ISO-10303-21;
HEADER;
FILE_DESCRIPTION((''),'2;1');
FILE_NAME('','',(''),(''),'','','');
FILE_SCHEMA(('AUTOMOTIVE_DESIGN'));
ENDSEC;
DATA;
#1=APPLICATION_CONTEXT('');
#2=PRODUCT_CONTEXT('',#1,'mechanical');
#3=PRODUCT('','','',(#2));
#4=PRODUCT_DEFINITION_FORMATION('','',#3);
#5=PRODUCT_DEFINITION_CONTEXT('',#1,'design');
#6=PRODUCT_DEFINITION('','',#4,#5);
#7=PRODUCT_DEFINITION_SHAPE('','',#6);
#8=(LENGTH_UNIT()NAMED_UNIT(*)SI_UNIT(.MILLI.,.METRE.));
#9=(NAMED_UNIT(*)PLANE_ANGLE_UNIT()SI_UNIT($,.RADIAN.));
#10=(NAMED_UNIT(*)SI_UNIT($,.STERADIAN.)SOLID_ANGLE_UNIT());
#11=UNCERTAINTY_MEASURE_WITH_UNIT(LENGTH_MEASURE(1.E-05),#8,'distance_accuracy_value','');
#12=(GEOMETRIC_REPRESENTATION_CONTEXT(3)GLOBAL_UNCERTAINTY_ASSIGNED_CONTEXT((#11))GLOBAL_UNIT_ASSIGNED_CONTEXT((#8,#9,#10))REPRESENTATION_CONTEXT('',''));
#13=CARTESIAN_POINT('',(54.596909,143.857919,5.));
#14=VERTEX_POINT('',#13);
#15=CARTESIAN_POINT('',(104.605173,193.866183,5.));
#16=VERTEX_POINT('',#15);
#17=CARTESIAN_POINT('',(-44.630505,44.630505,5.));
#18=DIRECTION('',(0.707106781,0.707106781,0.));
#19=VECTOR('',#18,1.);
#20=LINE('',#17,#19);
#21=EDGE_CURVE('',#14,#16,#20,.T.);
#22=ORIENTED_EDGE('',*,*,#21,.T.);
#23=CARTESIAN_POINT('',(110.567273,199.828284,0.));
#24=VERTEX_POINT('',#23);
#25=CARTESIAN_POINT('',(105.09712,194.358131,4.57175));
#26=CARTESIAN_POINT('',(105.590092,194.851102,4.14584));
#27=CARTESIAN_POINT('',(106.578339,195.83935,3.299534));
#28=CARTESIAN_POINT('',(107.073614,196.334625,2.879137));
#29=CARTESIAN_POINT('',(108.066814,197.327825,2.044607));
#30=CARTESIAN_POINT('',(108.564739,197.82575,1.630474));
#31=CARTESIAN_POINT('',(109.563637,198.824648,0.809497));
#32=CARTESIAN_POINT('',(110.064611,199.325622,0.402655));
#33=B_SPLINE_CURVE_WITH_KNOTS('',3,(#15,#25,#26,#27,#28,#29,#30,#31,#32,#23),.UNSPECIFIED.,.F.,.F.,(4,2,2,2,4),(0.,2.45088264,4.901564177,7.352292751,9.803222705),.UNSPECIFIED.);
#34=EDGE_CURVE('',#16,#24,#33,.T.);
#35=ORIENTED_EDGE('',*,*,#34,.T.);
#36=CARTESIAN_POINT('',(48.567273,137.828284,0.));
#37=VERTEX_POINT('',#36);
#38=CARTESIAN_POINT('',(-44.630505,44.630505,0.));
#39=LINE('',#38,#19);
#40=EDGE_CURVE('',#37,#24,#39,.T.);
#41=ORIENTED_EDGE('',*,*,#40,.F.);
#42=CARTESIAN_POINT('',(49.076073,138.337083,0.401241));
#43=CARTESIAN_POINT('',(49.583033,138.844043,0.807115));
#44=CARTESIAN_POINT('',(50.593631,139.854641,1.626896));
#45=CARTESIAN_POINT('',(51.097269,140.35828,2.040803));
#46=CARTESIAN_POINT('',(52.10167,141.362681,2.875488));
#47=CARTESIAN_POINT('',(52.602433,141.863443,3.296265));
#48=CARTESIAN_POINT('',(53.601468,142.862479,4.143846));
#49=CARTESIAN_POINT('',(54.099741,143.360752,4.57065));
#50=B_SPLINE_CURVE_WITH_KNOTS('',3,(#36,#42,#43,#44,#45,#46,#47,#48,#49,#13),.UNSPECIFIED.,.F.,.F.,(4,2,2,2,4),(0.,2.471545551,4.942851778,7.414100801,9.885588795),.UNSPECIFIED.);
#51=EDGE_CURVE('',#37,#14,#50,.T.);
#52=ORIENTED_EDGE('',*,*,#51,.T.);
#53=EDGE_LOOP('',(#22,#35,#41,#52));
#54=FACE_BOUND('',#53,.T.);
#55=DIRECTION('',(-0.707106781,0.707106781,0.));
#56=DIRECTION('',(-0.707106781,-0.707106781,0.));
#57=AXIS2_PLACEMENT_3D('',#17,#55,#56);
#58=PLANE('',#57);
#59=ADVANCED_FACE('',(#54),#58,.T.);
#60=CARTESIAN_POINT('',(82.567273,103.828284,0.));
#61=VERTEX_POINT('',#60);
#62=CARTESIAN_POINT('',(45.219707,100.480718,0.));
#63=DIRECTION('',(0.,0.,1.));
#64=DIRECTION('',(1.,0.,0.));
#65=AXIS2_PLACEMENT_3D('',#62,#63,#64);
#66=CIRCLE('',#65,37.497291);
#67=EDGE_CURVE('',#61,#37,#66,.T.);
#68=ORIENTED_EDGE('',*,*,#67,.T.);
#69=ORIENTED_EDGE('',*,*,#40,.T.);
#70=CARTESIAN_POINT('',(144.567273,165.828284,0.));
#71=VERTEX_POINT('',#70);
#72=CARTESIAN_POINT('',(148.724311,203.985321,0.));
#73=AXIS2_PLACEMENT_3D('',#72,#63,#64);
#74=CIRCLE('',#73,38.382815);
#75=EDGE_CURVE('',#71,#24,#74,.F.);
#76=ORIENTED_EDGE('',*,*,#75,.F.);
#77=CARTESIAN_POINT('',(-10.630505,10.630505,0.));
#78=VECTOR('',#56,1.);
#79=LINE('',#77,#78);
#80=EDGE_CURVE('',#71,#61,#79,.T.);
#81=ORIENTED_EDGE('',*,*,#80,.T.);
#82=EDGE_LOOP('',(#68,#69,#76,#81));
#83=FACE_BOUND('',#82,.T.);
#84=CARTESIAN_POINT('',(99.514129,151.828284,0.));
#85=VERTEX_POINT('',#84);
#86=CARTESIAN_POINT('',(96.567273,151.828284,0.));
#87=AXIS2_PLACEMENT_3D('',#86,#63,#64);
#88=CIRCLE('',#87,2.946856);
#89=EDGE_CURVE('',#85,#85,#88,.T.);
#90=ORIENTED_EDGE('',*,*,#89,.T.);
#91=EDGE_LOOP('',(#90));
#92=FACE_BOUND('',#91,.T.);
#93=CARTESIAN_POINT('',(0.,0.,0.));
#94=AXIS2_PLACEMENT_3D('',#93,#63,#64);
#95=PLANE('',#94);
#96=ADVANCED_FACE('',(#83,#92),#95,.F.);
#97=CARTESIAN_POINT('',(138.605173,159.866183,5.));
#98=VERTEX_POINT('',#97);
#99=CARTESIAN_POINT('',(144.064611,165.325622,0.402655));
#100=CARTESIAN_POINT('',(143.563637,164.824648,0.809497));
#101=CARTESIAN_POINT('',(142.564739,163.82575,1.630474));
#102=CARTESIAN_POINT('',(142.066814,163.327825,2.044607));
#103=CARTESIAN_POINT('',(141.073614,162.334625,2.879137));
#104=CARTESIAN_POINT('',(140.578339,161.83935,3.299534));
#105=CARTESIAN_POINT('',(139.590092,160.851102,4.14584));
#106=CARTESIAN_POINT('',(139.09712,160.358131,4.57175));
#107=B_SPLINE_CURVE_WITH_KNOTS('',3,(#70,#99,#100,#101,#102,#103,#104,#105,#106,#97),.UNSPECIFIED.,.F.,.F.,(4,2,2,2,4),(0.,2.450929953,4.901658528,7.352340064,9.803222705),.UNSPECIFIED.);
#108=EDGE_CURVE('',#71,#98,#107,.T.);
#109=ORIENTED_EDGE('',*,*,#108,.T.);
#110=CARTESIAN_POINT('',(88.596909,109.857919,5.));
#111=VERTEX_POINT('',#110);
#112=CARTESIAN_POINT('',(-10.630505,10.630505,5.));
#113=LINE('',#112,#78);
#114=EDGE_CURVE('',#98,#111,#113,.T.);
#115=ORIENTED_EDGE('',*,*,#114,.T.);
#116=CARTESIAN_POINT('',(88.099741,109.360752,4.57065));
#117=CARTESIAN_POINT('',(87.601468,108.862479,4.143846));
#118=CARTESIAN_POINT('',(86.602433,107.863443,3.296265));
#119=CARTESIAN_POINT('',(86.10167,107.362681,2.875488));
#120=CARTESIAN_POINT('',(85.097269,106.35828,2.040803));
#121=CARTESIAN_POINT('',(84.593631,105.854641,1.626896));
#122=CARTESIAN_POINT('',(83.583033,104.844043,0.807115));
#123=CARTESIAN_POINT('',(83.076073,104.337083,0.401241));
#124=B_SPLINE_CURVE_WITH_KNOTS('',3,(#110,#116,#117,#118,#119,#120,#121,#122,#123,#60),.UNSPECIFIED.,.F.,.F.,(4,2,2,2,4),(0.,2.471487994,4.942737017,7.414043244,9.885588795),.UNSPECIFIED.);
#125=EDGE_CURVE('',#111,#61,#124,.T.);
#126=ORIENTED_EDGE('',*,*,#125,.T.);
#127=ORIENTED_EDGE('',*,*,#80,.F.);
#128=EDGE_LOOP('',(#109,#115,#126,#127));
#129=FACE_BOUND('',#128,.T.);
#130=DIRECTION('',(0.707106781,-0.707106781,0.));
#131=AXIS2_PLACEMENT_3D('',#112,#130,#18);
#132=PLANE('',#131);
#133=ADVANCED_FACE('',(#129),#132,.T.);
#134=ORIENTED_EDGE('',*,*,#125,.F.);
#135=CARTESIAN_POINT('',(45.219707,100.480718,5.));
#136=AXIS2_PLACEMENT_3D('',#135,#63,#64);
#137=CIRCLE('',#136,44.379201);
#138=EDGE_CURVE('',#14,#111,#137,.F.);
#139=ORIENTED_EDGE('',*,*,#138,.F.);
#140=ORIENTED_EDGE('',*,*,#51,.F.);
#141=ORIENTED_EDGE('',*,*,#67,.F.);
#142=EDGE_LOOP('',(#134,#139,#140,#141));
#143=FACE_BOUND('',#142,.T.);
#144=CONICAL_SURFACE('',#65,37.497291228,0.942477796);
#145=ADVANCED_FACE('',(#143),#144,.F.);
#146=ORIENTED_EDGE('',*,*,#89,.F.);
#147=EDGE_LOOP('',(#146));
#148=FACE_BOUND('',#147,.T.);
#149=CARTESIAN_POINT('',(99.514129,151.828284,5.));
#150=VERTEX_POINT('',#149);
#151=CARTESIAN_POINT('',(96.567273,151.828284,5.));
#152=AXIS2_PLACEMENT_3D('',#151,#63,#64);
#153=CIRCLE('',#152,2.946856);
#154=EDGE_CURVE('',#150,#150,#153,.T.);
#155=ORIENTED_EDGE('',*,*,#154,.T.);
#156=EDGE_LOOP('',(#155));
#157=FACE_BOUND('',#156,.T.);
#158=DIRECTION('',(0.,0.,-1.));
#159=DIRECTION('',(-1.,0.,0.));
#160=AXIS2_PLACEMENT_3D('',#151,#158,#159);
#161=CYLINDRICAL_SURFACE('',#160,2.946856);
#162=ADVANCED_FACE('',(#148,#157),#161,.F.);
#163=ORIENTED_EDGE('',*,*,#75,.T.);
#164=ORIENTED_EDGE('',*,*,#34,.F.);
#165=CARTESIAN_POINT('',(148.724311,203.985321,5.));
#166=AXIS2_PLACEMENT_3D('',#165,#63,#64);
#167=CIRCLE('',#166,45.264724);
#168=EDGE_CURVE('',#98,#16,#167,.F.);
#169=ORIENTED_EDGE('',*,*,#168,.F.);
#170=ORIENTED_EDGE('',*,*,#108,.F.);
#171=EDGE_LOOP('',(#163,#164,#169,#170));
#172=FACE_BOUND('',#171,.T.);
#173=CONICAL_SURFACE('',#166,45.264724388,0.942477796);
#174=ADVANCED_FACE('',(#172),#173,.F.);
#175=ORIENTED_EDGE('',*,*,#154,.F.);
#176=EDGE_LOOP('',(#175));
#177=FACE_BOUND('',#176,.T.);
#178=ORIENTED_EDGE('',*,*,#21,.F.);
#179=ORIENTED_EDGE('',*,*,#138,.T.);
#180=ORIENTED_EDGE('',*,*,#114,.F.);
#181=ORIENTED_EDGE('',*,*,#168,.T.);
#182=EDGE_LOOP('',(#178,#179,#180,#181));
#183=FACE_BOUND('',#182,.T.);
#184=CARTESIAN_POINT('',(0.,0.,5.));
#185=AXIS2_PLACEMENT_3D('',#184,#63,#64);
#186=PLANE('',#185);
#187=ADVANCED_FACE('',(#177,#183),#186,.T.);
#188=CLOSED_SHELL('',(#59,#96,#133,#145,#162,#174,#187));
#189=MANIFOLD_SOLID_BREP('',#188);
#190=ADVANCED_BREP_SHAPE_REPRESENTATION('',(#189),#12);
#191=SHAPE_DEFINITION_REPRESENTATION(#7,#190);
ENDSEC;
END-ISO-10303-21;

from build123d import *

# Parameters (mm, degrees)
SKETCH3_R           = 2.94685624
BOSS_EXTRUDE1_DEPTH = 5
CHAMFER1_SIZE2      = 6.881909602
CHAMFER1_SIZE       = 5
CHAMFER2_SIZE2      = 5
CHAMFER2_SIZE       = 6.881909602


with BuildPart() as part:
    # Sketch3 → Boss-Extrude1 (new body)
    with BuildSketch(Plane.XY):
        with BuildLine():
            Line((48.567273068, 137.828283654), (110.567273068, 199.828283654))
            ThreePointArc((110.567273068, 199.828283654), (121.583561944, 176.84457253), (144.567273068, 165.828283654))
            Line((144.567273068, 165.828283654), (82.567273068, 103.828283654))
            ThreePointArc((82.567273068, 103.828283654), (71.734296399, 126.995306985), (48.567273068, 137.828283654))
        make_face()
        with Locations((96.567273068, 151.828283654)):
            Circle(SKETCH3_R, mode=Mode.SUBTRACT)
    extrude(amount=BOSS_EXTRUDE1_DEPTH)

    # Chamfer1
    chamfer1_edges = [part.edges().sort_by_distance(p)[0] for p in [
        (121.583561944, 176.84457253, 5),
    ]]
    chamfer1_side = [part.faces().sort_by_distance(p)[0] for p in [
        (121.583561944, 176.84457253, 4.9),
    ]]
    chamfer(chamfer1_edges, length=CHAMFER1_SIZE - 0.0001, length2=CHAMFER1_SIZE2 - 0.0001, reference=chamfer1_side[0])  # a hair under: the kernel refuses the full size

    # Chamfer2
    chamfer2_edges = [part.edges().sort_by_distance(p)[0] for p in [
        (71.734296399, 126.995306985, 5),
    ]]
    chamfer2_side = [part.faces().sort_by_distance(p)[0] for p in [
        (71.805007077, 127.066017663, 5),
    ]]
    chamfer(chamfer2_edges, length=CHAMFER2_SIZE - 0.0001, length2=CHAMFER2_SIZE2 - 0.0001, reference=chamfer2_side[0])  # a hair under: the kernel refuses the full size


solid = part.part
